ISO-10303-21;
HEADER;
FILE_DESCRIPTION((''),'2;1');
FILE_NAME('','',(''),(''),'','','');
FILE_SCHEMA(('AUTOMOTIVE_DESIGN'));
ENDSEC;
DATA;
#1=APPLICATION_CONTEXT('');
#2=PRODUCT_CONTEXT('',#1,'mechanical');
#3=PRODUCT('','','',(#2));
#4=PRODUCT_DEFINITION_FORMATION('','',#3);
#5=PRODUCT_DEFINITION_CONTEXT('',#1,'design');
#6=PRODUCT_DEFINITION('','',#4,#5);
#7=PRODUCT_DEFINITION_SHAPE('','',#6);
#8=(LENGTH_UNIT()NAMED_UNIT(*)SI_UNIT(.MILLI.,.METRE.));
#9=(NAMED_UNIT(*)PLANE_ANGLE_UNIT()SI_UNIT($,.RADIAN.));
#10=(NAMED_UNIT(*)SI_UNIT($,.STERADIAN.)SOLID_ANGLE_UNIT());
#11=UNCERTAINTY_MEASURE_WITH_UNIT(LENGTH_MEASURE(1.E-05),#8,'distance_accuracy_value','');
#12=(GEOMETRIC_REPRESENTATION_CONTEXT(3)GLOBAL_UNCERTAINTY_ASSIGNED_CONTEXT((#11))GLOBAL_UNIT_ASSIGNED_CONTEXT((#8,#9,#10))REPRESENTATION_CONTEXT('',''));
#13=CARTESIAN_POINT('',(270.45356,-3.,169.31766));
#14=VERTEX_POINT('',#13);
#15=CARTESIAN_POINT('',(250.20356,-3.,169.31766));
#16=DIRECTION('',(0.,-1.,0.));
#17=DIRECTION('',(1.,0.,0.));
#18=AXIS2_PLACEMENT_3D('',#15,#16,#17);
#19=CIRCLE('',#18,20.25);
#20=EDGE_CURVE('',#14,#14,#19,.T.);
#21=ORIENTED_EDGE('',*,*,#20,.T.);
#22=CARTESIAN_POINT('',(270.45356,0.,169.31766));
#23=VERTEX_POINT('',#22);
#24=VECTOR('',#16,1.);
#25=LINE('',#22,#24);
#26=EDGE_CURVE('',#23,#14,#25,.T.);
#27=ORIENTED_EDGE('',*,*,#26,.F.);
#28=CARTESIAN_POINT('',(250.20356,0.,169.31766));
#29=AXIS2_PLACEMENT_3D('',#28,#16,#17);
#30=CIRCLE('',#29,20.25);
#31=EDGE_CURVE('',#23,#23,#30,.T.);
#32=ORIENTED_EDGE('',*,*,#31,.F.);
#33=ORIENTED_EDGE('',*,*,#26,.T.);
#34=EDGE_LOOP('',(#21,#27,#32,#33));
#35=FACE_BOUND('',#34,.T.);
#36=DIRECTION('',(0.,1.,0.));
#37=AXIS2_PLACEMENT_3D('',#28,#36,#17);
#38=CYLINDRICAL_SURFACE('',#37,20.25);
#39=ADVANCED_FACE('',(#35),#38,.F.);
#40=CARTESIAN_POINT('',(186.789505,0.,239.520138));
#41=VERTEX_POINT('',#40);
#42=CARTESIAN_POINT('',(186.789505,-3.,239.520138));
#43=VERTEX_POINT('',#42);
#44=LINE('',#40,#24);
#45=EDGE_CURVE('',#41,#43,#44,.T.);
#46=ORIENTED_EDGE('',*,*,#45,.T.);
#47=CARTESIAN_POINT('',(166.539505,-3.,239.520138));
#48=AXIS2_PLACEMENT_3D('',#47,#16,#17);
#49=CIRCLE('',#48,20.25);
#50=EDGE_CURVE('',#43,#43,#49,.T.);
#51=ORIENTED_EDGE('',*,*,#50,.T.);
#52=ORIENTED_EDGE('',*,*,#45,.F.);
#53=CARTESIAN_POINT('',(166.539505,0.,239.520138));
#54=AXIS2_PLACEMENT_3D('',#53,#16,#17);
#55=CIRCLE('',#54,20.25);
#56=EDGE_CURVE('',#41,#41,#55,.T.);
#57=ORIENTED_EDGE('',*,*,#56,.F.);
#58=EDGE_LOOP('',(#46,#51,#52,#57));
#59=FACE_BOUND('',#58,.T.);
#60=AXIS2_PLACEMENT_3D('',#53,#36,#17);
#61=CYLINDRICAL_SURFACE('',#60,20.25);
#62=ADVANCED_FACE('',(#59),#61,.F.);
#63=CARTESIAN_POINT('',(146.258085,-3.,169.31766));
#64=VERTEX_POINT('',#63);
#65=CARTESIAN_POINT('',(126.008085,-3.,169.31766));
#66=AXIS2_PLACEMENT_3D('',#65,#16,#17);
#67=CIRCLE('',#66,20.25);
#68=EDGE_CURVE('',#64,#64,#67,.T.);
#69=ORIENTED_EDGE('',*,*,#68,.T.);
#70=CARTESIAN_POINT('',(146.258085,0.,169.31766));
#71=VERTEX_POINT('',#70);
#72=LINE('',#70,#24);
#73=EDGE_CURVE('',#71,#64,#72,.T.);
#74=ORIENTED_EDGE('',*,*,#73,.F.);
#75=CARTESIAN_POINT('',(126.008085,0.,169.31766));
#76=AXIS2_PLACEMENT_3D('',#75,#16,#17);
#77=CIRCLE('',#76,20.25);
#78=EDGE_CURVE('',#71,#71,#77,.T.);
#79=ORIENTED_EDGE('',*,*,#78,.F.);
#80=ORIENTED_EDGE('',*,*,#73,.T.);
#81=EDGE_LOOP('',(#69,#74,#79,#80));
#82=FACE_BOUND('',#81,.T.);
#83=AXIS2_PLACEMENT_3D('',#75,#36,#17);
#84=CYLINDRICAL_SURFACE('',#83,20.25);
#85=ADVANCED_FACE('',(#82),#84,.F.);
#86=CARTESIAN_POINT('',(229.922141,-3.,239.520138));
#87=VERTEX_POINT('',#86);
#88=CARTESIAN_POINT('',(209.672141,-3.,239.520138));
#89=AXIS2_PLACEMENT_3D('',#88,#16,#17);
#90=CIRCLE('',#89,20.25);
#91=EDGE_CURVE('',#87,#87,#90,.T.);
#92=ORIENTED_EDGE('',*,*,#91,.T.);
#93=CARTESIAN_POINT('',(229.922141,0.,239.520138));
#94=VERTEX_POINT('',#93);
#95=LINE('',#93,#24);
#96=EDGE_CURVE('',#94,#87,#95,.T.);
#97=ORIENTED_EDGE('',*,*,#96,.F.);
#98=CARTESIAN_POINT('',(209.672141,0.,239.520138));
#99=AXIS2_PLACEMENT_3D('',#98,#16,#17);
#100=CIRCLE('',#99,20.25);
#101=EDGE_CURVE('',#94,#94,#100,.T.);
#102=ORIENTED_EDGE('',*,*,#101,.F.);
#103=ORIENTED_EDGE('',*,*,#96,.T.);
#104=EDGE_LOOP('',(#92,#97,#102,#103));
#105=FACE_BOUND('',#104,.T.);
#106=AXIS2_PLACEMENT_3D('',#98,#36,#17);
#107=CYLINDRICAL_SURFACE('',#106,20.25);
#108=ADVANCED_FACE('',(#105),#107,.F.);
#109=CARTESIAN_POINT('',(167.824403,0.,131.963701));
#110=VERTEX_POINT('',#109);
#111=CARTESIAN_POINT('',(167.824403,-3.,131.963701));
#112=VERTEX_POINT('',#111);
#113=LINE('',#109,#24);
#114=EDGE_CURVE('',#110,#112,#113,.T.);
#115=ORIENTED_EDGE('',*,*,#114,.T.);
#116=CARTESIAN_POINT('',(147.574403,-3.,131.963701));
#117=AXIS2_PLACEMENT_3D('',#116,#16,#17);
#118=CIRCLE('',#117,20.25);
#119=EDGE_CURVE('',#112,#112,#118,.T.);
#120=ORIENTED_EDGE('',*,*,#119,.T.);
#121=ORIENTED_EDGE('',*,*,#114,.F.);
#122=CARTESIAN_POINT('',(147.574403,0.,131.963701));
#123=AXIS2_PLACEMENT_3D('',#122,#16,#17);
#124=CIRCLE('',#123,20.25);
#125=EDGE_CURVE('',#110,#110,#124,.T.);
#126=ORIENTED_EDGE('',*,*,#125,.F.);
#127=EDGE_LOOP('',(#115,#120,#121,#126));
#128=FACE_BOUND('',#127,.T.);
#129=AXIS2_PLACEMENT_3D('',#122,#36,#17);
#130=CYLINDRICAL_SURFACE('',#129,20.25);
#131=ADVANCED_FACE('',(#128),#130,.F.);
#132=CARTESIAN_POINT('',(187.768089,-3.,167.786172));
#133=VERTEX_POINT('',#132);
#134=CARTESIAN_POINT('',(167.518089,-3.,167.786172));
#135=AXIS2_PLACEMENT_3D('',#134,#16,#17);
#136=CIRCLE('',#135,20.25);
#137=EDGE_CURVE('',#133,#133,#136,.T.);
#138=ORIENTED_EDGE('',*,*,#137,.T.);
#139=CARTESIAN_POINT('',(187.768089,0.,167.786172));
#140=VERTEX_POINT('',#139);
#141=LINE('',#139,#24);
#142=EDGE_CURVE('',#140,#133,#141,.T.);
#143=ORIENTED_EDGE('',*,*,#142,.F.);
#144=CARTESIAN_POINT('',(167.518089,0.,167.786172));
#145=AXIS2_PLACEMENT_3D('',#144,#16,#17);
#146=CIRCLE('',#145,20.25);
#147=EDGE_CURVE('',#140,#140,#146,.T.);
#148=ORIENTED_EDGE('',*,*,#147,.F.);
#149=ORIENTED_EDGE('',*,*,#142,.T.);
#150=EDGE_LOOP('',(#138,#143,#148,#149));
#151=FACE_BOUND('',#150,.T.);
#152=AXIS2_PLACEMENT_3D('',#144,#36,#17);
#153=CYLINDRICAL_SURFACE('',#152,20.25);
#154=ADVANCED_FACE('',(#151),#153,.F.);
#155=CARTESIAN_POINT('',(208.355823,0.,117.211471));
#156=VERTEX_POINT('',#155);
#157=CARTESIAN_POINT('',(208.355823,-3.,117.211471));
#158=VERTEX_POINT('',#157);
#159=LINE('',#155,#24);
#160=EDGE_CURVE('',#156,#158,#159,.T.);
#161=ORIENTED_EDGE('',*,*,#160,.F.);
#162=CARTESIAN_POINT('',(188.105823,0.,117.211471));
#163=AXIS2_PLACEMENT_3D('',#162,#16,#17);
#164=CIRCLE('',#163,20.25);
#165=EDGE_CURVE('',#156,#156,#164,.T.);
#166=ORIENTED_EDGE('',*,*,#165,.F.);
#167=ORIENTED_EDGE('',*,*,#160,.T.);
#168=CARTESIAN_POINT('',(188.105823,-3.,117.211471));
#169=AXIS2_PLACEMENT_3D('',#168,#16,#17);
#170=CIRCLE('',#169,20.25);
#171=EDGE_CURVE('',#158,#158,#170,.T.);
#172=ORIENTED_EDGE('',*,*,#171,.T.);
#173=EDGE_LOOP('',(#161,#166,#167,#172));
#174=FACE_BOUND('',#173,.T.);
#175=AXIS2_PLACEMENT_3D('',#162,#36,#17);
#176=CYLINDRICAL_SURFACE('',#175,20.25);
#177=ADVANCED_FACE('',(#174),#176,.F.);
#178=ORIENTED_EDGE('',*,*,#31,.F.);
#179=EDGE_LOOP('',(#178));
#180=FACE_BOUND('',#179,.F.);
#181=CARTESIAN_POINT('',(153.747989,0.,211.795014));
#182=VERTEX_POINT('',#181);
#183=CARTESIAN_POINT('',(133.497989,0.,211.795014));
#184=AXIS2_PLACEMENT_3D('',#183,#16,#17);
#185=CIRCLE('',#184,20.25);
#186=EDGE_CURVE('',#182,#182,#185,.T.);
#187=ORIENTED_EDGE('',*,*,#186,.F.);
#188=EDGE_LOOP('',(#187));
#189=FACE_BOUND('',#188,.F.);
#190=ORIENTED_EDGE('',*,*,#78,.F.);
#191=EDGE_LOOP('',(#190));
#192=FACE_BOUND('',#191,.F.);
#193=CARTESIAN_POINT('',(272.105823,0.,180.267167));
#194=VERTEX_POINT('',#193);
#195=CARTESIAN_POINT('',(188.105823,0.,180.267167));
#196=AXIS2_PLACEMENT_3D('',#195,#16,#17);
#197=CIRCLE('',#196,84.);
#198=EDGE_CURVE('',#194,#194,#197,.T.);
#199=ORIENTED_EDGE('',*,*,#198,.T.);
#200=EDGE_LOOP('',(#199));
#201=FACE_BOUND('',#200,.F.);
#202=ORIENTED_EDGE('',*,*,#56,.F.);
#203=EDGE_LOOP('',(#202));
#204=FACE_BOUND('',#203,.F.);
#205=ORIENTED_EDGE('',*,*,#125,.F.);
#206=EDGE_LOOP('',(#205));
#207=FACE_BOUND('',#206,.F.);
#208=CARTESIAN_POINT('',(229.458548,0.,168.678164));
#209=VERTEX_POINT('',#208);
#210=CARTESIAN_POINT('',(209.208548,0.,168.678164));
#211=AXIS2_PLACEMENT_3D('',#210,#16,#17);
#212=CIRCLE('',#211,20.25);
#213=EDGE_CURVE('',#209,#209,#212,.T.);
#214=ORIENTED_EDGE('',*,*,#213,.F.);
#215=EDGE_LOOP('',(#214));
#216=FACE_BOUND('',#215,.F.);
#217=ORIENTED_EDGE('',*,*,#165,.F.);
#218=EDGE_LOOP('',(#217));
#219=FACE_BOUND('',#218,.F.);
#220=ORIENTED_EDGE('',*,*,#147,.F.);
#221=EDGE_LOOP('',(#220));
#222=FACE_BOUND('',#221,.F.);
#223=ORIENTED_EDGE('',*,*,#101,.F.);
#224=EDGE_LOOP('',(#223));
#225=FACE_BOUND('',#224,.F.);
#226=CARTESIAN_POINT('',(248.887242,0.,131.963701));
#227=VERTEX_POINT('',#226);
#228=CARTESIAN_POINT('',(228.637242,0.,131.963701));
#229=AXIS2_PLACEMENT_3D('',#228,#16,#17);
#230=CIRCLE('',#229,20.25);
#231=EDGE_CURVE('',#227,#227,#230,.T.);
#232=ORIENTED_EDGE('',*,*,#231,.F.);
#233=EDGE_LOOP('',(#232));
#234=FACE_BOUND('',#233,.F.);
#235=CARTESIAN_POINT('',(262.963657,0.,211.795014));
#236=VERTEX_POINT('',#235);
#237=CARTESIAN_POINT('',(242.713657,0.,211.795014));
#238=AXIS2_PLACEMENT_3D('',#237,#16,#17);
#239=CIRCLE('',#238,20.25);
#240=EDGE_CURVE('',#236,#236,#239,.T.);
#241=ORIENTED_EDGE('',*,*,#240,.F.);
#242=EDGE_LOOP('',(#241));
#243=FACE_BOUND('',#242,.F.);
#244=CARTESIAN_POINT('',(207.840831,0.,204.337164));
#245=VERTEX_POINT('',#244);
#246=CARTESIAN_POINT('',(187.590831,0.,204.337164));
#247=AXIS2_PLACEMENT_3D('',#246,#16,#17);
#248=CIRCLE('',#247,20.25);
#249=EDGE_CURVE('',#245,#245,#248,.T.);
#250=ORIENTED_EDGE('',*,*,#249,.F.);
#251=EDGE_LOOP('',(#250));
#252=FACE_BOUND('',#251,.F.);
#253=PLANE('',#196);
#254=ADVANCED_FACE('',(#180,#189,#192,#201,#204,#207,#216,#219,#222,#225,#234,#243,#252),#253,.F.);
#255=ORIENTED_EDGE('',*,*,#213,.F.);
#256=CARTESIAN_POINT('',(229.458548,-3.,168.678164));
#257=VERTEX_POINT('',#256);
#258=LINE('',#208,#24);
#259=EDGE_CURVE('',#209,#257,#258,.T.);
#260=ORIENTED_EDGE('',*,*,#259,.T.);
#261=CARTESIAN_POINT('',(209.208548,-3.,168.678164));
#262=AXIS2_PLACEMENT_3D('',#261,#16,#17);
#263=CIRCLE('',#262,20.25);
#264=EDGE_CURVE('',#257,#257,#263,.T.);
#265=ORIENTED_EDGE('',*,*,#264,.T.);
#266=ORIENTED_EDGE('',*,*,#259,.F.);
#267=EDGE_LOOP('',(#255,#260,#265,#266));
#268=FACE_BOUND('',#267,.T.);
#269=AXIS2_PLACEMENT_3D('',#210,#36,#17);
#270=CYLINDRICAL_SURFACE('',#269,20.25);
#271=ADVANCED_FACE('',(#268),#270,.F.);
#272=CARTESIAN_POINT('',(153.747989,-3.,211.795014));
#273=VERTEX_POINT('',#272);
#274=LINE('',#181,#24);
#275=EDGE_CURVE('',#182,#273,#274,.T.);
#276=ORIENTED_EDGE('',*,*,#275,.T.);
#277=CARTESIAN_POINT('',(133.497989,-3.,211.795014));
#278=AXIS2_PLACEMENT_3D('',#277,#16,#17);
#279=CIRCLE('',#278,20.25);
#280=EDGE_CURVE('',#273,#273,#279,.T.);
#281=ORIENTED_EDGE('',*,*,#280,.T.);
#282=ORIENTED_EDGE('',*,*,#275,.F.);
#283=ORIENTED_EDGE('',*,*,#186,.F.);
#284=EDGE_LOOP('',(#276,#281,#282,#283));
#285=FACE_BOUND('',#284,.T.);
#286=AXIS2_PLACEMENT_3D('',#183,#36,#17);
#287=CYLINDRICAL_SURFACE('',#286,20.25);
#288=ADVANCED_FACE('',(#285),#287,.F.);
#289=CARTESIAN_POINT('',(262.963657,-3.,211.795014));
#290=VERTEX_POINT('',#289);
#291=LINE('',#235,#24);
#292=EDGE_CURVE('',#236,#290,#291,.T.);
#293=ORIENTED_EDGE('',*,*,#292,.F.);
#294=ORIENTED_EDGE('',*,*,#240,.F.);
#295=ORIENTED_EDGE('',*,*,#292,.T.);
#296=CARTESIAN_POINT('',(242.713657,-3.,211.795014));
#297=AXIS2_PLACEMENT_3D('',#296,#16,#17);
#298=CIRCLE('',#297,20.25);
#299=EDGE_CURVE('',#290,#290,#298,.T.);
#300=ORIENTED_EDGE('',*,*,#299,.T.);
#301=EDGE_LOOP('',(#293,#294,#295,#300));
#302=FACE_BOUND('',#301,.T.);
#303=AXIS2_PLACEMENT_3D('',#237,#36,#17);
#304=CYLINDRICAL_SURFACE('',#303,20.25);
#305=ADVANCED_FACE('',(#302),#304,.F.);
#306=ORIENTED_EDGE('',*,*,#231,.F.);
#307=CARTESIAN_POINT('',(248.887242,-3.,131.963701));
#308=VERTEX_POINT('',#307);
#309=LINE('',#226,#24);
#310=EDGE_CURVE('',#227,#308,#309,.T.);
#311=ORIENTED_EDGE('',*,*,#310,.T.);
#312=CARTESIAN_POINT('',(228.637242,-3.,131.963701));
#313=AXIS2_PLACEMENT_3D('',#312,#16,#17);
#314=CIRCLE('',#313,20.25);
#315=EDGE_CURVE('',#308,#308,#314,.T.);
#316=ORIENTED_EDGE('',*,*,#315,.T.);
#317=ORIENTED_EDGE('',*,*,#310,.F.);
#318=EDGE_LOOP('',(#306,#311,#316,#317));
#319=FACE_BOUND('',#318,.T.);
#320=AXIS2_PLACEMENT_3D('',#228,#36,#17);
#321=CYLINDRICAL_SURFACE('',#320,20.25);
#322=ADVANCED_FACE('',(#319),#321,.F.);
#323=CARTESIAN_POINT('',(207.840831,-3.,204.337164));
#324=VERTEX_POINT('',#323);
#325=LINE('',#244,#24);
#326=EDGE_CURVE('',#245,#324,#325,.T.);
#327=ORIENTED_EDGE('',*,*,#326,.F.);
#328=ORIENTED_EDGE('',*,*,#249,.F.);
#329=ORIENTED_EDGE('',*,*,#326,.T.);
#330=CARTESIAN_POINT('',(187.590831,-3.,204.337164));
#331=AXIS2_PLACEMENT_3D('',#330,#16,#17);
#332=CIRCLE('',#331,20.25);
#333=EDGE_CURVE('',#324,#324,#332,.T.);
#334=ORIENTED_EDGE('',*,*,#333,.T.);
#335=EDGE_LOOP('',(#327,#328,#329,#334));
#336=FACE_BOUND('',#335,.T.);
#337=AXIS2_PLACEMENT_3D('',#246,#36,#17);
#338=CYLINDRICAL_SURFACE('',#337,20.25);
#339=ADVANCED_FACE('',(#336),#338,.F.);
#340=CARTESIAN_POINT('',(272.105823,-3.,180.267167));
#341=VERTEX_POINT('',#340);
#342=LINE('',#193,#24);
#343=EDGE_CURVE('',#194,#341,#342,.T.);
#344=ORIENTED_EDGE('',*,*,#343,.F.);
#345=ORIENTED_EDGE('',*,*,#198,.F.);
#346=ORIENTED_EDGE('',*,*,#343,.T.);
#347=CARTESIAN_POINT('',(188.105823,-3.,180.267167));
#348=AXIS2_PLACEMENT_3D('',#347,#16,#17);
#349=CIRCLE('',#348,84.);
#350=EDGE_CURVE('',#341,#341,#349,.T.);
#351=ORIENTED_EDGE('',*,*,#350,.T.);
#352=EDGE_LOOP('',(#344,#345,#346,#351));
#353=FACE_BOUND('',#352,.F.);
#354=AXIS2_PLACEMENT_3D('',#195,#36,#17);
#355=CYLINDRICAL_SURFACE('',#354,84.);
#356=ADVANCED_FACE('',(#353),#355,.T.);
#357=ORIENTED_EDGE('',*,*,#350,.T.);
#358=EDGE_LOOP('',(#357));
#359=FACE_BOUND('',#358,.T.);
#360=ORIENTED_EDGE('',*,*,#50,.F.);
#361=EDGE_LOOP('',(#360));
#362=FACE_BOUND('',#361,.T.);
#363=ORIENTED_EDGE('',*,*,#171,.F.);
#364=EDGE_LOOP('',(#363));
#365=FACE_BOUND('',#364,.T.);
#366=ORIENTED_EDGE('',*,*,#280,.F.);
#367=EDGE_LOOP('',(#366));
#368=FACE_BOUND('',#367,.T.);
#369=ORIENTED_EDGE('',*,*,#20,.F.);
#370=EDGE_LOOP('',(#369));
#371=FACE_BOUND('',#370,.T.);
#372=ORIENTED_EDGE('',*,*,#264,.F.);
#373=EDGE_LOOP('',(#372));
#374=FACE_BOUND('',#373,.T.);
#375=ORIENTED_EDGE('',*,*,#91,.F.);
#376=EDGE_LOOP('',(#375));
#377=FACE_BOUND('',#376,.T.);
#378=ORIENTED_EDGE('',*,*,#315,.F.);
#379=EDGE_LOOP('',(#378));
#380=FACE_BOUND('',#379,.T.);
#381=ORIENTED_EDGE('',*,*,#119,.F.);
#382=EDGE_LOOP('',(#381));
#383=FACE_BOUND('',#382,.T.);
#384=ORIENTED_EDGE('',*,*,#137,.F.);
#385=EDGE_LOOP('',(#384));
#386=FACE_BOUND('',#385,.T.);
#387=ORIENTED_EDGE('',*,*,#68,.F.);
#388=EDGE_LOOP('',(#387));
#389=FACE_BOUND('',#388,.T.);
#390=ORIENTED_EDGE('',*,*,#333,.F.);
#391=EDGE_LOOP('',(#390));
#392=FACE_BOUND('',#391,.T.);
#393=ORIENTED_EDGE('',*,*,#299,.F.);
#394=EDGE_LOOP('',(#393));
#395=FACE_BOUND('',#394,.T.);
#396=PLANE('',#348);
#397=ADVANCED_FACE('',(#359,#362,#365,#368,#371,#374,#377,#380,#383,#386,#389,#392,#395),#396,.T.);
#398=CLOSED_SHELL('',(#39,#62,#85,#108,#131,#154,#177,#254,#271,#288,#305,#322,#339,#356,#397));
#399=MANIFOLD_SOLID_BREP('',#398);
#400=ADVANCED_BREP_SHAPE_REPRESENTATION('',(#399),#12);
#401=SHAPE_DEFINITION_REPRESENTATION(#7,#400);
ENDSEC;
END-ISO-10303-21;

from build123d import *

# Parameters (mm, degrees)
F0_R     = 84
F0_R_2   = 20.25
F1_DEPTH = 3


# Not quite as in the source:
# - a feature of the source that left no trace in its solid (it failed there, or was rolled back) is left out


with BuildPart() as f1:
    # F0 (on Front) → F1 (new body)
    with BuildSketch(Plane.XZ):
        with Locations((188.1058226409, 180.2671665321)):
            Circle(F0_R)
        with Locations((147.5744029219, 131.9637014691)):
            Circle(F0_R_2, mode=Mode.SUBTRACT)
        with Locations((126.008084946, 169.3176599356)):
            Circle(F0_R_2, mode=Mode.SUBTRACT)
        with Locations((188.1058226409, 117.2114711388)):
            Circle(F0_R_2, mode=Mode.SUBTRACT)
        with Locations((228.6372423598, 131.9637014691)):
            Circle(F0_R_2, mode=Mode.SUBTRACT)
        with Locations((167.5180891549, 167.7861717837)):
            Circle(F0_R_2, mode=Mode.SUBTRACT)
        with Locations((209.2085479005, 168.6781637011)):
            Circle(F0_R_2, mode=Mode.SUBTRACT)
        with Locations((250.2035603357, 169.3176599356)):
            Circle(F0_R_2, mode=Mode.SUBTRACT)
        with Locations((133.497988577, 211.7950142288)):
            Circle(F0_R_2, mode=Mode.SUBTRACT)
        with Locations((187.5908308672, 204.3371641115)):
            Circle(F0_R_2, mode=Mode.SUBTRACT)
        with Locations((242.7136567047, 211.7950142288)):
            Circle(F0_R_2, mode=Mode.SUBTRACT)
        with Locations((166.539504665, 239.5201381917)):
            Circle(F0_R_2, mode=Mode.SUBTRACT)
        with Locations((209.6721406168, 239.5201381917)):
            Circle(F0_R_2, mode=Mode.SUBTRACT)
    extrude(amount=F1_DEPTH)


solid = f1.part
